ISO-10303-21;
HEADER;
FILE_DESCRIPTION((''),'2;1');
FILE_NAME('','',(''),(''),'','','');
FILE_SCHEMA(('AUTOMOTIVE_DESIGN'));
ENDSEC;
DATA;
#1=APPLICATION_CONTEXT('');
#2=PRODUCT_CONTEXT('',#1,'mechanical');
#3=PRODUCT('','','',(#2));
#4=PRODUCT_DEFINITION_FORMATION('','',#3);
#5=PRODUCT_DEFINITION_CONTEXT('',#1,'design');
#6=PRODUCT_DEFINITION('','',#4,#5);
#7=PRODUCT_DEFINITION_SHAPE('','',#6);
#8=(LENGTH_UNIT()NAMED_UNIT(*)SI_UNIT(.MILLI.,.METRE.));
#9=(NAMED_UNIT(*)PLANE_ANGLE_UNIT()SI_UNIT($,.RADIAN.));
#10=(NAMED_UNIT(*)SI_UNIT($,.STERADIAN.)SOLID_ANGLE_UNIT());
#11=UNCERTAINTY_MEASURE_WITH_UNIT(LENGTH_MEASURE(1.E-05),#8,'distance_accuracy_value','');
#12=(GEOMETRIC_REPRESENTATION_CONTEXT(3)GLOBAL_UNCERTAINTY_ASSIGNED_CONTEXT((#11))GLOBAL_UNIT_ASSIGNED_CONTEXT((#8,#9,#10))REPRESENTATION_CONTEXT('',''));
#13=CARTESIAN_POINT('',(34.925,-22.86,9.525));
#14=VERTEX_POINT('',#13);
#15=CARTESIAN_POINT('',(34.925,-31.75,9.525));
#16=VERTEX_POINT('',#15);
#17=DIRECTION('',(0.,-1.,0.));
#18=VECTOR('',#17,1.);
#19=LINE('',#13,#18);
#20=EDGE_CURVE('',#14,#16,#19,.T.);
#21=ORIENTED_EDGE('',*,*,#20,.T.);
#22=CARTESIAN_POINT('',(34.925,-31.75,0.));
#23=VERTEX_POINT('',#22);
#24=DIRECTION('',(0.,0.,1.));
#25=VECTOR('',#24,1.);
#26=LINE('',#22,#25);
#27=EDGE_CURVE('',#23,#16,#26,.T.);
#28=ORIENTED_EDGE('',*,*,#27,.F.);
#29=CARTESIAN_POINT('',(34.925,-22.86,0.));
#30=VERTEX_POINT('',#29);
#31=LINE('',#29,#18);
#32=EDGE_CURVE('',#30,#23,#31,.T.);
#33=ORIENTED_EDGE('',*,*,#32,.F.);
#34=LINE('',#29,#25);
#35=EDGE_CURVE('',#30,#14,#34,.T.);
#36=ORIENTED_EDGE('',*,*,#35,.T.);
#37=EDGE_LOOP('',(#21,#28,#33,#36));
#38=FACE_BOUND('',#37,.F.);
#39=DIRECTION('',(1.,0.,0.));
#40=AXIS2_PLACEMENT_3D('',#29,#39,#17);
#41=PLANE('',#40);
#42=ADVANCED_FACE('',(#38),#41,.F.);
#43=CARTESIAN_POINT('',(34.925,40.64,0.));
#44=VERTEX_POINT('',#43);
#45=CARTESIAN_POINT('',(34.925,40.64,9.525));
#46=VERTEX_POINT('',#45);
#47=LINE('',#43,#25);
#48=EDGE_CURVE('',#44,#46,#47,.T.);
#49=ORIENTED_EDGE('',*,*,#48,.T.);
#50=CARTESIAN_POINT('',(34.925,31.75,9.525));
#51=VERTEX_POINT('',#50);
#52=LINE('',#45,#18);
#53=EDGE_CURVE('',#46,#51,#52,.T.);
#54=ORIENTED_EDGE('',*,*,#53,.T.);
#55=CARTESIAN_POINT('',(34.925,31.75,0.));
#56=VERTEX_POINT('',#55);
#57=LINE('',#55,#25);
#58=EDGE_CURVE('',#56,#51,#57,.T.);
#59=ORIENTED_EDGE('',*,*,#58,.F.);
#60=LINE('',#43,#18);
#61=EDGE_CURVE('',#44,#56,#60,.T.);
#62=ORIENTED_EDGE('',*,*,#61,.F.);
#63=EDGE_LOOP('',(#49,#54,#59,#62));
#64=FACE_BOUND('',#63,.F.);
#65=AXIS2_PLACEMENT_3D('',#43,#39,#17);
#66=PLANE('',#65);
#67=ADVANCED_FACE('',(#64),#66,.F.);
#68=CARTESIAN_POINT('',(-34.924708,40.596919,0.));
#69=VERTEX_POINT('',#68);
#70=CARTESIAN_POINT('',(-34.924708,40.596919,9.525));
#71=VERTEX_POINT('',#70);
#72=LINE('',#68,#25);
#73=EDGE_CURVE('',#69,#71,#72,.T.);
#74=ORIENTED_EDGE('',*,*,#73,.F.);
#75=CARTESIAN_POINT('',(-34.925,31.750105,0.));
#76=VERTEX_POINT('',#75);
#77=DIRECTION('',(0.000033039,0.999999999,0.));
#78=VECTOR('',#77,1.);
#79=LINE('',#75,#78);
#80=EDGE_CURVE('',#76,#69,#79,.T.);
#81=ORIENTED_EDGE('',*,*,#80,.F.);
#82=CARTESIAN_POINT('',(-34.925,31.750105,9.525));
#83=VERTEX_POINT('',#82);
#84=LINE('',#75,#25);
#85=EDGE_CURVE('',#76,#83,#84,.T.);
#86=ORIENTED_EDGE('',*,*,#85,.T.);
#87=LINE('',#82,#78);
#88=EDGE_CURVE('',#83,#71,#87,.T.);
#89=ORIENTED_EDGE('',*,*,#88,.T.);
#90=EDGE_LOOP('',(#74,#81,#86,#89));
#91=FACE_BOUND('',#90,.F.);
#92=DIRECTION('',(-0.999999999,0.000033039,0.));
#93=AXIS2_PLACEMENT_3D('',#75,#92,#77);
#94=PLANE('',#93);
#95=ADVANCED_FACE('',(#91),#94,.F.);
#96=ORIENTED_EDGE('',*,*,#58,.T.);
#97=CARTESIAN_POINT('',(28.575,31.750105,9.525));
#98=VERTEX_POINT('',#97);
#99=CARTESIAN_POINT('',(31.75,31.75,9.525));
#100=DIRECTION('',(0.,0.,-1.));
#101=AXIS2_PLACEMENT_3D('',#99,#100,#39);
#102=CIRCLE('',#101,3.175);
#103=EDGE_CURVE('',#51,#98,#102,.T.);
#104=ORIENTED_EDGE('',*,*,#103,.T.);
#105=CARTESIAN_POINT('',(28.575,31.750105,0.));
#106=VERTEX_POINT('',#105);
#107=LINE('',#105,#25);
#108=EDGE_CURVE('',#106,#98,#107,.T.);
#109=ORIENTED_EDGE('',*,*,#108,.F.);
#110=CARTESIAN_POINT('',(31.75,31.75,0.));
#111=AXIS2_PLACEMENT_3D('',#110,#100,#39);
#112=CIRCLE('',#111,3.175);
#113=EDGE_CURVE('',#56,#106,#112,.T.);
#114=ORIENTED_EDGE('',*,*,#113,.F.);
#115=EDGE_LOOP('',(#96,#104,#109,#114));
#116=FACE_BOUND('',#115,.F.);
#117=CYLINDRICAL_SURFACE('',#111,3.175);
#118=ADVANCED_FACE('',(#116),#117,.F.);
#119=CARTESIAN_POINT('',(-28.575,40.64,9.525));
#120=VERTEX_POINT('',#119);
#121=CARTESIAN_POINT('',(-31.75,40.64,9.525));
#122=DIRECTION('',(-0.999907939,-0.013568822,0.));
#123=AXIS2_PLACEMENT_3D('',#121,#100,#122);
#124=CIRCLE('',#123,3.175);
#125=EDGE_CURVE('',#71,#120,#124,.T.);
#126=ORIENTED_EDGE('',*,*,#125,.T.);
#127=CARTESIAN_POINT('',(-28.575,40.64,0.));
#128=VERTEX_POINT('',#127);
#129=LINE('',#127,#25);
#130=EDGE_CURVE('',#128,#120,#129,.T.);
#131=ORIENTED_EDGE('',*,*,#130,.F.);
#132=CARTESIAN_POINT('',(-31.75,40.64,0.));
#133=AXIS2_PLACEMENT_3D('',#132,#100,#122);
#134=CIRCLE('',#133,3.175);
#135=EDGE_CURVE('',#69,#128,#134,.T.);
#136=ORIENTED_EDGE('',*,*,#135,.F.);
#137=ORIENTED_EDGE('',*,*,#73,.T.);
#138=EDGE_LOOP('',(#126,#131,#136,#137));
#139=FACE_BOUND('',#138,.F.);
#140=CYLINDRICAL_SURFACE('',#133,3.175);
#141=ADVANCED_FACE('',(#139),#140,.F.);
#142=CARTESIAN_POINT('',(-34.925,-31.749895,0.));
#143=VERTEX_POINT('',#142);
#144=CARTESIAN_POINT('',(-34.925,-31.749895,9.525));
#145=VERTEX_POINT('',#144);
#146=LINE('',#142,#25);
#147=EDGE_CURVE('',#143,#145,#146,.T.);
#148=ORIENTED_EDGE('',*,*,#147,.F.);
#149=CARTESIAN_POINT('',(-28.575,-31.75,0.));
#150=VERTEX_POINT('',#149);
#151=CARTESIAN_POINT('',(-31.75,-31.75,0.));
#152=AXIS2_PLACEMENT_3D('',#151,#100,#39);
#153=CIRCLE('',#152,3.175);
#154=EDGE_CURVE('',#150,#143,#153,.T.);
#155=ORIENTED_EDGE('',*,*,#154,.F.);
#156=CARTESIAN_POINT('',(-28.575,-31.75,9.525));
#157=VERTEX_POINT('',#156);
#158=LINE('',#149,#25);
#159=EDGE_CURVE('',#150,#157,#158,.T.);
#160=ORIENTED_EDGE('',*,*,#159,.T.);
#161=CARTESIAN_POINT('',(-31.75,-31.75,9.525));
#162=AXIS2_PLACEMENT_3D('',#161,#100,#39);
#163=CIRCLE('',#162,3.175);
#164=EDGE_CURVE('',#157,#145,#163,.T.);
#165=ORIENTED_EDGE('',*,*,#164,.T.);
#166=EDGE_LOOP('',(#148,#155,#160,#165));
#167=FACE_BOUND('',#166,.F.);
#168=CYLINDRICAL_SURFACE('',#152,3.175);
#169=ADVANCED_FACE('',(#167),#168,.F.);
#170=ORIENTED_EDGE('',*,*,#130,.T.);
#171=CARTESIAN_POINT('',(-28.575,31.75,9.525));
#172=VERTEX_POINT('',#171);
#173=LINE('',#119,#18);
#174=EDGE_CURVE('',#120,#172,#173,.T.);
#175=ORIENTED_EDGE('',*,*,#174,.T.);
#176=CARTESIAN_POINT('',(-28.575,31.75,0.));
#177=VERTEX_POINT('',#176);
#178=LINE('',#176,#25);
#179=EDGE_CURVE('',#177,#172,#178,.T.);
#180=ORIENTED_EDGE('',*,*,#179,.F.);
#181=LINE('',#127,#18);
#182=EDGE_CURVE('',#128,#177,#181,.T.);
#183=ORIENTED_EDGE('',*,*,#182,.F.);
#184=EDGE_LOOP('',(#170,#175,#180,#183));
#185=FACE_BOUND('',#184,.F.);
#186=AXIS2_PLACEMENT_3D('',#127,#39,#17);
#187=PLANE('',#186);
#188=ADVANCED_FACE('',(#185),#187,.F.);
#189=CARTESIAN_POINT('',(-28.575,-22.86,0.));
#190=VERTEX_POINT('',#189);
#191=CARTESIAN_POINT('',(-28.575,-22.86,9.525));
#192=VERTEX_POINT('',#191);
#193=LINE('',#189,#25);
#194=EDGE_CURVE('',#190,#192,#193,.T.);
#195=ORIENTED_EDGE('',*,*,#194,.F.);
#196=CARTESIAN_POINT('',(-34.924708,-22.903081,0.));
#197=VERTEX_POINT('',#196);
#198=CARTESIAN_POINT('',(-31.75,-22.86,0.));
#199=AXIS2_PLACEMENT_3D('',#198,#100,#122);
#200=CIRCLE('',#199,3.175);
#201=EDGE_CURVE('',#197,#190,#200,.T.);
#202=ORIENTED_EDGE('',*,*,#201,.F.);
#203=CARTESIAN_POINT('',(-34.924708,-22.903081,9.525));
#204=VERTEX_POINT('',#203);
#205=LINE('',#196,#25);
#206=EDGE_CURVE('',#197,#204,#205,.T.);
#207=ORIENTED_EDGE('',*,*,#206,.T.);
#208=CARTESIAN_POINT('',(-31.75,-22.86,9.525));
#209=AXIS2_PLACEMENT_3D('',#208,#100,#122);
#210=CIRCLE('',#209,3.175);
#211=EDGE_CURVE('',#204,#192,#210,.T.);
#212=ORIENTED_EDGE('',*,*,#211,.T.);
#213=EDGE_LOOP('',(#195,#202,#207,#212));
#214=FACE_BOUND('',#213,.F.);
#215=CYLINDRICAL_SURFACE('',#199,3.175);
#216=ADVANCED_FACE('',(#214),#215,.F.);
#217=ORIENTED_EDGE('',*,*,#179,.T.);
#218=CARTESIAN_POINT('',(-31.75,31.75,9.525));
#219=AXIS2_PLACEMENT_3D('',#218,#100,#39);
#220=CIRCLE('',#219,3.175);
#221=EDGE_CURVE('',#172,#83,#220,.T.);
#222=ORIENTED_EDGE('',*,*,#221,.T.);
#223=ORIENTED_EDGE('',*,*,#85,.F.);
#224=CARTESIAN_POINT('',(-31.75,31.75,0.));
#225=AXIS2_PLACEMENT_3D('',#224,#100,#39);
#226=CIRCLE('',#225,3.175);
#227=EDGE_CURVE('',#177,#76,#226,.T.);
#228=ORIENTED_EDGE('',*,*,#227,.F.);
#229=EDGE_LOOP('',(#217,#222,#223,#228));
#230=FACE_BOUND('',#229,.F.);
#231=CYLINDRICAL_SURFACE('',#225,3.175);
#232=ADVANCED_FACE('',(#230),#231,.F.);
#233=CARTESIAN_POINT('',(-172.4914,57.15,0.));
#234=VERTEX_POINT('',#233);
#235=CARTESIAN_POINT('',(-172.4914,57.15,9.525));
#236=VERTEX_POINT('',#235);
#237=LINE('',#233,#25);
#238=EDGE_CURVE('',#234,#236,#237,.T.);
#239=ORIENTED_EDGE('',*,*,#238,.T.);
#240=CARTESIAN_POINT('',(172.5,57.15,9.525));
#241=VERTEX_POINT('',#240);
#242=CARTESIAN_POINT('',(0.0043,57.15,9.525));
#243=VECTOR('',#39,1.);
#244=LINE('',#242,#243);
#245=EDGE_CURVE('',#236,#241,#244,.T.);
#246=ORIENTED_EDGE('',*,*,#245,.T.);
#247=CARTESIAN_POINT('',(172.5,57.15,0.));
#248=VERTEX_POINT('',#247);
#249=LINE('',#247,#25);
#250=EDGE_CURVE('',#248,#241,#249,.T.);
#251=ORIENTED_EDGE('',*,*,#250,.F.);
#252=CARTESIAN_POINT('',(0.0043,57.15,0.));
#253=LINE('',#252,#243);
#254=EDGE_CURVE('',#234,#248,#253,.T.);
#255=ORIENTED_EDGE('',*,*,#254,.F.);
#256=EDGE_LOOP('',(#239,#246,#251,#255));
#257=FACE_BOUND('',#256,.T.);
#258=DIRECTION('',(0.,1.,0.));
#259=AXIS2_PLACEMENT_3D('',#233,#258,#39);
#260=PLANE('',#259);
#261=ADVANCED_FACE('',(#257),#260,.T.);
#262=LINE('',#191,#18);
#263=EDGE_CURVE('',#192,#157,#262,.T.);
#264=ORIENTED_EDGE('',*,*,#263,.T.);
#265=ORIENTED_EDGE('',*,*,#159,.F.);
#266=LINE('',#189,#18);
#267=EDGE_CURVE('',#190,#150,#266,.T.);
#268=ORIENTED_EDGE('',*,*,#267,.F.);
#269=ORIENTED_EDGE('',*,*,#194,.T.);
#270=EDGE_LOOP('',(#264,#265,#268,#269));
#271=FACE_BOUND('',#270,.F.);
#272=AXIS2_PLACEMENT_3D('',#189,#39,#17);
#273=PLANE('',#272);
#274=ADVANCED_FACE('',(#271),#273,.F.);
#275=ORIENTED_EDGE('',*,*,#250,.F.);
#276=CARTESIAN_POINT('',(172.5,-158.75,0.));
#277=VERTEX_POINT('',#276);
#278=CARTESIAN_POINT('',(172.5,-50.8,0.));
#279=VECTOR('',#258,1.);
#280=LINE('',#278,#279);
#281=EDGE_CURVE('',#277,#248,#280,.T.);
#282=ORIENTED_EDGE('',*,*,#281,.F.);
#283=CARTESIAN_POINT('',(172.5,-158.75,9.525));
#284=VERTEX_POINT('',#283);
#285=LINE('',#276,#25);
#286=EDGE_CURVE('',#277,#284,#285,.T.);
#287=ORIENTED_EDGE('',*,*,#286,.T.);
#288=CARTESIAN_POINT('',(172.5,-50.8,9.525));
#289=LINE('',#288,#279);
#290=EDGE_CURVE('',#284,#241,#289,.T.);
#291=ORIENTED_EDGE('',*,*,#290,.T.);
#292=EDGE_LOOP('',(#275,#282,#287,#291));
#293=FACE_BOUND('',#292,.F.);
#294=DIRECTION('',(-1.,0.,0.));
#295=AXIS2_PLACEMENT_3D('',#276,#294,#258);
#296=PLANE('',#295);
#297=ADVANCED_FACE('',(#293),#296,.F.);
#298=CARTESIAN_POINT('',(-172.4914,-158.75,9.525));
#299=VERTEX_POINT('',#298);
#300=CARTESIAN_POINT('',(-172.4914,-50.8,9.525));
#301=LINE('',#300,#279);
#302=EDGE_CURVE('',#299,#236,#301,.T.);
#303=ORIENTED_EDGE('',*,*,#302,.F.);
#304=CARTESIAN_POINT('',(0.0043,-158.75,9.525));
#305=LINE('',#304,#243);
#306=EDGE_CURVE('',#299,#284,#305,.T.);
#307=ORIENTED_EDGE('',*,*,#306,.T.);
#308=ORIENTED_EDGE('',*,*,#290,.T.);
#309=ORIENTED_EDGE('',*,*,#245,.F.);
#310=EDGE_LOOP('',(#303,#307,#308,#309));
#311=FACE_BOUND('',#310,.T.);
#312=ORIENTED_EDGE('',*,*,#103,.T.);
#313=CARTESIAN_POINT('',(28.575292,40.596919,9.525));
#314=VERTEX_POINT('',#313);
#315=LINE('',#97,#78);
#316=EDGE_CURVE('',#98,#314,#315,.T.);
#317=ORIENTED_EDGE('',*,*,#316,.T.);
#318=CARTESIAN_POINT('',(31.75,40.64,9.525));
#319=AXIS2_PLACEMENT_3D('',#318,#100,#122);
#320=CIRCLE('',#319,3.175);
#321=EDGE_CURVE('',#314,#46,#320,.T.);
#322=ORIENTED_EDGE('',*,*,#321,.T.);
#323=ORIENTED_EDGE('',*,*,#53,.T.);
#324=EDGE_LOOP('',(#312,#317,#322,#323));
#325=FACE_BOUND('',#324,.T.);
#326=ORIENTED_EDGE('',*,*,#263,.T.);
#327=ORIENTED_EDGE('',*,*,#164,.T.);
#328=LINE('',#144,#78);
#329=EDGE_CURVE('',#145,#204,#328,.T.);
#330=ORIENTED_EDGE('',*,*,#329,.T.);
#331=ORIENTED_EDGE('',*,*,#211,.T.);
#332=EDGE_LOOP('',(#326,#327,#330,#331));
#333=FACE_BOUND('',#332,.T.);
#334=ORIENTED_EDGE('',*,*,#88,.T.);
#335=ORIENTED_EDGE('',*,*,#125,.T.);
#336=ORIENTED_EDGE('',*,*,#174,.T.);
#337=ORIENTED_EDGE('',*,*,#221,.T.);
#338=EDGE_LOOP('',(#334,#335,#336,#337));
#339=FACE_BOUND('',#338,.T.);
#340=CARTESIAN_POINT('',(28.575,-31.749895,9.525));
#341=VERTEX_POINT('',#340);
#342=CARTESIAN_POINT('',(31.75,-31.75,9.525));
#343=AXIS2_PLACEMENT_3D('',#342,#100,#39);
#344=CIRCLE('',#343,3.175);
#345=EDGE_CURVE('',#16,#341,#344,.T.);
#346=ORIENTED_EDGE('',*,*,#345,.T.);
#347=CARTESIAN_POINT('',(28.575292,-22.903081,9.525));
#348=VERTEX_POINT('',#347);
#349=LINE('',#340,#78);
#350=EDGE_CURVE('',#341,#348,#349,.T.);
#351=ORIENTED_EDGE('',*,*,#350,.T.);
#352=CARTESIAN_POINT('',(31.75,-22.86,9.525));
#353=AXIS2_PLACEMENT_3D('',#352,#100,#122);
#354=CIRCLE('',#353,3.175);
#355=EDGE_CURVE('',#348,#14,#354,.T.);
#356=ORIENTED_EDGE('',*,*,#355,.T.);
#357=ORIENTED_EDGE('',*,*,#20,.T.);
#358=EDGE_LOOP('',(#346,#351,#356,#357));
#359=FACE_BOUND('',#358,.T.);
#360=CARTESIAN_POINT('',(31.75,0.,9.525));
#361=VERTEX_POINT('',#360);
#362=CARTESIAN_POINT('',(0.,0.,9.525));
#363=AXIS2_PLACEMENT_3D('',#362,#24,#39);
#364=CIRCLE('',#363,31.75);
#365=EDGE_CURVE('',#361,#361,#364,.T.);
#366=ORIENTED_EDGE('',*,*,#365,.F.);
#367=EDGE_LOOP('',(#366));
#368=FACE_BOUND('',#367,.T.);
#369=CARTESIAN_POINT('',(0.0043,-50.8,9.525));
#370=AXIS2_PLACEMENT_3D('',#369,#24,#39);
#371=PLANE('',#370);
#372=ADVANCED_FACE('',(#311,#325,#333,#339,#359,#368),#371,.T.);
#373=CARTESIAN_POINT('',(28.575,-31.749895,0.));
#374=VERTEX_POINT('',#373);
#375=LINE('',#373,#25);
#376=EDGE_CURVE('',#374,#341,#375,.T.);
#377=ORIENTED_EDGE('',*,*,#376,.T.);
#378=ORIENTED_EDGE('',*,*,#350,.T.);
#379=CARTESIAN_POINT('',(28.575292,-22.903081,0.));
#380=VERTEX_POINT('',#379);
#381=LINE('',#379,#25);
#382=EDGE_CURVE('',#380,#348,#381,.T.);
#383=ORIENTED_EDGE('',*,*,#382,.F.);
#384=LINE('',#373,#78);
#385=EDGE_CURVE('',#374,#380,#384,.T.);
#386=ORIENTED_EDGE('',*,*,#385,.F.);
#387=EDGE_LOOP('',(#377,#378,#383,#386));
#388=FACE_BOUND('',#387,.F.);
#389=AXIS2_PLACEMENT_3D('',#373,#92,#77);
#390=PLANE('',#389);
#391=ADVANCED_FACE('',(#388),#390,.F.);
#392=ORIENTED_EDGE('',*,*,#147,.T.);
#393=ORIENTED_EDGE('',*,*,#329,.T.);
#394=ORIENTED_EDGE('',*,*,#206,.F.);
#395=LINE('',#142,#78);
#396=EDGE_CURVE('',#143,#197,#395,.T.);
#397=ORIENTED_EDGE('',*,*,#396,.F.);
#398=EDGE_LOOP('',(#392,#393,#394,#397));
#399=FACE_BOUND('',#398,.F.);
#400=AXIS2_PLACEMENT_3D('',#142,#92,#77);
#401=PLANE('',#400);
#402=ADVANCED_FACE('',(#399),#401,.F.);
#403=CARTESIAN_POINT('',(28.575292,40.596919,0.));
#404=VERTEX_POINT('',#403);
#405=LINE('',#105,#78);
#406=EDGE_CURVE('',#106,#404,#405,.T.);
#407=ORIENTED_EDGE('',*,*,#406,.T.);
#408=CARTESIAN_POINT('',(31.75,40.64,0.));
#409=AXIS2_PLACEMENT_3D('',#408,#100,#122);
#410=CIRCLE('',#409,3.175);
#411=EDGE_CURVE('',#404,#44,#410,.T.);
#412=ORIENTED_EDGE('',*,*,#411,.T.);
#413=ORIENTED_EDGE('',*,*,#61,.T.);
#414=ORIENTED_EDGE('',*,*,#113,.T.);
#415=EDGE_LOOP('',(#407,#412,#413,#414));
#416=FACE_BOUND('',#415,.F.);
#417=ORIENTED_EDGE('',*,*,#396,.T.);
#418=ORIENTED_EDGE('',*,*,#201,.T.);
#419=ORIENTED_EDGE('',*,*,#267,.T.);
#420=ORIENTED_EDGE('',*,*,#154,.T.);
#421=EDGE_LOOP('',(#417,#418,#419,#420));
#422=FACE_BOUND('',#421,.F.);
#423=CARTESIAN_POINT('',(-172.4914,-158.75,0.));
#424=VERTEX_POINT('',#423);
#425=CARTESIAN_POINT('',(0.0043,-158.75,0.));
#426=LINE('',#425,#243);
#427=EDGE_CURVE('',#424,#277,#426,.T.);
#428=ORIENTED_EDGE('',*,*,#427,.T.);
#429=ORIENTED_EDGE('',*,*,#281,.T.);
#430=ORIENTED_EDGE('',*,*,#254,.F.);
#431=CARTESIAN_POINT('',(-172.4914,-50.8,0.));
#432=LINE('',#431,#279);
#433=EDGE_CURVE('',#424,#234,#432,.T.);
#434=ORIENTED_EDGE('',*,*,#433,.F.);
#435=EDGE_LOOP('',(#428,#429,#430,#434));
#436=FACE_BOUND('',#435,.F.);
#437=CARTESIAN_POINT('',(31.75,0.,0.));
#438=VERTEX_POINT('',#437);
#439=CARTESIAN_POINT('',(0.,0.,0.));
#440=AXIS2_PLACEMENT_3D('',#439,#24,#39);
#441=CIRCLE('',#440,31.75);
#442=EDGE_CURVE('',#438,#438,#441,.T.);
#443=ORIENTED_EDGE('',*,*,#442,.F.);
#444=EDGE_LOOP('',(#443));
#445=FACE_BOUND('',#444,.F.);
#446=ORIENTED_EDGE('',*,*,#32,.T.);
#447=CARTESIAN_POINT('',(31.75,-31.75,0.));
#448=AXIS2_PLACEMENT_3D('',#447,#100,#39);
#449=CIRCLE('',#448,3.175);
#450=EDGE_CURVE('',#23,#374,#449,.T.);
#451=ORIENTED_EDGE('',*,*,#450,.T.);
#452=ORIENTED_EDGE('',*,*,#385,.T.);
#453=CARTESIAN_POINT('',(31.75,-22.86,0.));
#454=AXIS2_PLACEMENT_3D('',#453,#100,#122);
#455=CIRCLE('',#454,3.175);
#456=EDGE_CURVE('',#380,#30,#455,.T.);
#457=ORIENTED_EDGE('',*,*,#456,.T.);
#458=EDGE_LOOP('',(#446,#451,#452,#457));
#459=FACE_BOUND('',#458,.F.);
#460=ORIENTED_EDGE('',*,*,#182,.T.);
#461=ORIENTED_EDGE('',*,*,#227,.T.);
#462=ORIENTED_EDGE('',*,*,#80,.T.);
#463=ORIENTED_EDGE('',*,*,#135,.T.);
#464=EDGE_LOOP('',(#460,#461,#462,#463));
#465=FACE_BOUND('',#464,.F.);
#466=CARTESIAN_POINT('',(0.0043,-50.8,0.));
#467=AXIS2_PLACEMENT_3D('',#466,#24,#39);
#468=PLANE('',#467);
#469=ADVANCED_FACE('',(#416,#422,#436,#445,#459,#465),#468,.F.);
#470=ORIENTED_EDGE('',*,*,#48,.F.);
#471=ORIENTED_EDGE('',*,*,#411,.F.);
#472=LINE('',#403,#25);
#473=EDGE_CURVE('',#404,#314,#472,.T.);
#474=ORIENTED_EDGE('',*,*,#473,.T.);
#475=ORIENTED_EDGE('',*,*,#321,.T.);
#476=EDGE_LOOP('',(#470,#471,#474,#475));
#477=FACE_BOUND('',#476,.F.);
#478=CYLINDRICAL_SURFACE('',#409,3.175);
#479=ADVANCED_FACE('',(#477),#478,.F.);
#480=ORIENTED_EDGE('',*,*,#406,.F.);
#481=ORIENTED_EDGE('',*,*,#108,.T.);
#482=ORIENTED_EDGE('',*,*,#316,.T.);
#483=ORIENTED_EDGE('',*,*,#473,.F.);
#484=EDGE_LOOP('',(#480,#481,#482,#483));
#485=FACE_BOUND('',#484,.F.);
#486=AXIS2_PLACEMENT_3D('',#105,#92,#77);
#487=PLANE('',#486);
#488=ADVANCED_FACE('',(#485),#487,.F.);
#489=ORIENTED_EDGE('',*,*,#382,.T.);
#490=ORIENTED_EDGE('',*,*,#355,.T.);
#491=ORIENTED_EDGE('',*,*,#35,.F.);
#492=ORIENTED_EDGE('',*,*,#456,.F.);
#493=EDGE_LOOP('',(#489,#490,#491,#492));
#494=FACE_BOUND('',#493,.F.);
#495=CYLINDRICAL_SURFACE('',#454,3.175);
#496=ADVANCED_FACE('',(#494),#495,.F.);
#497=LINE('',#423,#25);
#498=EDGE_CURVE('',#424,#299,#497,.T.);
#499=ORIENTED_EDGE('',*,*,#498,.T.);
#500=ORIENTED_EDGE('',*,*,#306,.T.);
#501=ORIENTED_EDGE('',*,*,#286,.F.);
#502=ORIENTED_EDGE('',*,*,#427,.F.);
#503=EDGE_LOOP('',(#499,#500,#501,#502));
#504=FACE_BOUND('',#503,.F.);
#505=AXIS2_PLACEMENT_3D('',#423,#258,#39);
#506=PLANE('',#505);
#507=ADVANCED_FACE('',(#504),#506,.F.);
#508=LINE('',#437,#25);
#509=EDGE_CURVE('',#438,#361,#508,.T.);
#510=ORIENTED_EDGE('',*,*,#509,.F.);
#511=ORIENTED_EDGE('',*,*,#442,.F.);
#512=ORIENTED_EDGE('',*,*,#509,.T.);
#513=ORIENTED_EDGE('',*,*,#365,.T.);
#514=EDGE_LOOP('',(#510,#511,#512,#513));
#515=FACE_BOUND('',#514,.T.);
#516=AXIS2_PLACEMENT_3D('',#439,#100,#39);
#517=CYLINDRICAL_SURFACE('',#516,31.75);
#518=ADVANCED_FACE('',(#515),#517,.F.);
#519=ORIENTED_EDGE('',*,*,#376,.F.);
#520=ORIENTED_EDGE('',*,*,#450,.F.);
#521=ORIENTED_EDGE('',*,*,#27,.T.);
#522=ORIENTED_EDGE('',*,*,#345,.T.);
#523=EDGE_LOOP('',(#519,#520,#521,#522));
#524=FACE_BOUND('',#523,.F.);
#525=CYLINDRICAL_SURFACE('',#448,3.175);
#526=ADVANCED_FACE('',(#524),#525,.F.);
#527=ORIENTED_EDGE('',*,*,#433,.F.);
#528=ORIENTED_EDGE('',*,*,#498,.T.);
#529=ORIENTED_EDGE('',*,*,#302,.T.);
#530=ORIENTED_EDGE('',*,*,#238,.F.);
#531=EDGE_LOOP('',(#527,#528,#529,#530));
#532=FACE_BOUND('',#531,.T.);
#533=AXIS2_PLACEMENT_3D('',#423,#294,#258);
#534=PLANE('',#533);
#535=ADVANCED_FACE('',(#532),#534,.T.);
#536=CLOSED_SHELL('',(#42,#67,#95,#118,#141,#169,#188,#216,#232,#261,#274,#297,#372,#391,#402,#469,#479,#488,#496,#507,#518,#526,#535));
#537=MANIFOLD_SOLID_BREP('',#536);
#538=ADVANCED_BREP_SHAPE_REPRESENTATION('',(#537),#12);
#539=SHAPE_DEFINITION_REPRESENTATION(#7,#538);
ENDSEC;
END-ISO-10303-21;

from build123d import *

# Parameters (mm, degrees)
F0_W     = 344.9914
F0_H     = 215.9
F0_R     = 31.75
F1_DEPTH = 9.525


# Not quite as in the source:
# - a length typed as a fraction of an inch, garbled in the dataset ("3 / 203.2 mm" for 3/8 in), is restored


with BuildPart() as f1:
    # F0 (on Top) → F1 (new body)
    with BuildSketch(Plane.XY):
        with Locations((0.0043, -50.8)):
            Rectangle(F0_W, F0_H)
        with BuildLine():
            ThreePointArc((-34.9247077073, -22.903081011), (-31.7715410013, -19.685073074), (-28.575, -22.86))
            Line((-28.575, -22.86), (-28.575, -31.75))
            ThreePointArc((-28.575, -31.75), (-31.7500524496, -34.9249999996), (-34.9249999983, -31.7498951008))
            Line((-34.9249999983, -31.7498951008), (-34.9247077073, -22.903081011))
        make_face(mode=Mode.SUBTRACT)
        Circle(F0_R, mode=Mode.SUBTRACT)
        with BuildLine():
            Line((-28.575, 40.64), (-28.575, 31.75))
            ThreePointArc((-28.575, 31.75), (-31.7500524496, 28.5750000004), (-34.9249999983, 31.7501048992))
            Line((-34.9249999983, 31.7501048992), (-34.9247077073, 40.596918989))
            ThreePointArc((-34.9247077073, 40.596918989), (-31.7715410013, 43.814926926), (-28.575, 40.64))
        make_face(mode=Mode.SUBTRACT)
        with BuildLine():
            ThreePointArc((28.5752922927, -22.903081011), (31.7284589987, -19.685073074), (34.925, -22.86))
            Line((34.925, -22.86), (34.925, -31.75))
            ThreePointArc((34.925, -31.75), (31.7499475504, -34.9249999996), (28.5750000017, -31.7498951008))
            Line((28.5750000017, -31.7498951008), (28.5752922927, -22.903081011))
        make_face(mode=Mode.SUBTRACT)
        with BuildLine():
            ThreePointArc((28.5752922927, 40.596918989), (31.7284589987, 43.814926926), (34.925, 40.64))
            Line((34.925, 40.64), (34.925, 31.75))
            ThreePointArc((34.925, 31.75), (31.7499475504, 28.5750000004), (28.5750000017, 31.7501048992))
            Line((28.5750000017, 31.7501048992), (28.5752922927, 40.596918989))
        make_face(mode=Mode.SUBTRACT)
    extrude(amount=F1_DEPTH)


solid = f1.part
